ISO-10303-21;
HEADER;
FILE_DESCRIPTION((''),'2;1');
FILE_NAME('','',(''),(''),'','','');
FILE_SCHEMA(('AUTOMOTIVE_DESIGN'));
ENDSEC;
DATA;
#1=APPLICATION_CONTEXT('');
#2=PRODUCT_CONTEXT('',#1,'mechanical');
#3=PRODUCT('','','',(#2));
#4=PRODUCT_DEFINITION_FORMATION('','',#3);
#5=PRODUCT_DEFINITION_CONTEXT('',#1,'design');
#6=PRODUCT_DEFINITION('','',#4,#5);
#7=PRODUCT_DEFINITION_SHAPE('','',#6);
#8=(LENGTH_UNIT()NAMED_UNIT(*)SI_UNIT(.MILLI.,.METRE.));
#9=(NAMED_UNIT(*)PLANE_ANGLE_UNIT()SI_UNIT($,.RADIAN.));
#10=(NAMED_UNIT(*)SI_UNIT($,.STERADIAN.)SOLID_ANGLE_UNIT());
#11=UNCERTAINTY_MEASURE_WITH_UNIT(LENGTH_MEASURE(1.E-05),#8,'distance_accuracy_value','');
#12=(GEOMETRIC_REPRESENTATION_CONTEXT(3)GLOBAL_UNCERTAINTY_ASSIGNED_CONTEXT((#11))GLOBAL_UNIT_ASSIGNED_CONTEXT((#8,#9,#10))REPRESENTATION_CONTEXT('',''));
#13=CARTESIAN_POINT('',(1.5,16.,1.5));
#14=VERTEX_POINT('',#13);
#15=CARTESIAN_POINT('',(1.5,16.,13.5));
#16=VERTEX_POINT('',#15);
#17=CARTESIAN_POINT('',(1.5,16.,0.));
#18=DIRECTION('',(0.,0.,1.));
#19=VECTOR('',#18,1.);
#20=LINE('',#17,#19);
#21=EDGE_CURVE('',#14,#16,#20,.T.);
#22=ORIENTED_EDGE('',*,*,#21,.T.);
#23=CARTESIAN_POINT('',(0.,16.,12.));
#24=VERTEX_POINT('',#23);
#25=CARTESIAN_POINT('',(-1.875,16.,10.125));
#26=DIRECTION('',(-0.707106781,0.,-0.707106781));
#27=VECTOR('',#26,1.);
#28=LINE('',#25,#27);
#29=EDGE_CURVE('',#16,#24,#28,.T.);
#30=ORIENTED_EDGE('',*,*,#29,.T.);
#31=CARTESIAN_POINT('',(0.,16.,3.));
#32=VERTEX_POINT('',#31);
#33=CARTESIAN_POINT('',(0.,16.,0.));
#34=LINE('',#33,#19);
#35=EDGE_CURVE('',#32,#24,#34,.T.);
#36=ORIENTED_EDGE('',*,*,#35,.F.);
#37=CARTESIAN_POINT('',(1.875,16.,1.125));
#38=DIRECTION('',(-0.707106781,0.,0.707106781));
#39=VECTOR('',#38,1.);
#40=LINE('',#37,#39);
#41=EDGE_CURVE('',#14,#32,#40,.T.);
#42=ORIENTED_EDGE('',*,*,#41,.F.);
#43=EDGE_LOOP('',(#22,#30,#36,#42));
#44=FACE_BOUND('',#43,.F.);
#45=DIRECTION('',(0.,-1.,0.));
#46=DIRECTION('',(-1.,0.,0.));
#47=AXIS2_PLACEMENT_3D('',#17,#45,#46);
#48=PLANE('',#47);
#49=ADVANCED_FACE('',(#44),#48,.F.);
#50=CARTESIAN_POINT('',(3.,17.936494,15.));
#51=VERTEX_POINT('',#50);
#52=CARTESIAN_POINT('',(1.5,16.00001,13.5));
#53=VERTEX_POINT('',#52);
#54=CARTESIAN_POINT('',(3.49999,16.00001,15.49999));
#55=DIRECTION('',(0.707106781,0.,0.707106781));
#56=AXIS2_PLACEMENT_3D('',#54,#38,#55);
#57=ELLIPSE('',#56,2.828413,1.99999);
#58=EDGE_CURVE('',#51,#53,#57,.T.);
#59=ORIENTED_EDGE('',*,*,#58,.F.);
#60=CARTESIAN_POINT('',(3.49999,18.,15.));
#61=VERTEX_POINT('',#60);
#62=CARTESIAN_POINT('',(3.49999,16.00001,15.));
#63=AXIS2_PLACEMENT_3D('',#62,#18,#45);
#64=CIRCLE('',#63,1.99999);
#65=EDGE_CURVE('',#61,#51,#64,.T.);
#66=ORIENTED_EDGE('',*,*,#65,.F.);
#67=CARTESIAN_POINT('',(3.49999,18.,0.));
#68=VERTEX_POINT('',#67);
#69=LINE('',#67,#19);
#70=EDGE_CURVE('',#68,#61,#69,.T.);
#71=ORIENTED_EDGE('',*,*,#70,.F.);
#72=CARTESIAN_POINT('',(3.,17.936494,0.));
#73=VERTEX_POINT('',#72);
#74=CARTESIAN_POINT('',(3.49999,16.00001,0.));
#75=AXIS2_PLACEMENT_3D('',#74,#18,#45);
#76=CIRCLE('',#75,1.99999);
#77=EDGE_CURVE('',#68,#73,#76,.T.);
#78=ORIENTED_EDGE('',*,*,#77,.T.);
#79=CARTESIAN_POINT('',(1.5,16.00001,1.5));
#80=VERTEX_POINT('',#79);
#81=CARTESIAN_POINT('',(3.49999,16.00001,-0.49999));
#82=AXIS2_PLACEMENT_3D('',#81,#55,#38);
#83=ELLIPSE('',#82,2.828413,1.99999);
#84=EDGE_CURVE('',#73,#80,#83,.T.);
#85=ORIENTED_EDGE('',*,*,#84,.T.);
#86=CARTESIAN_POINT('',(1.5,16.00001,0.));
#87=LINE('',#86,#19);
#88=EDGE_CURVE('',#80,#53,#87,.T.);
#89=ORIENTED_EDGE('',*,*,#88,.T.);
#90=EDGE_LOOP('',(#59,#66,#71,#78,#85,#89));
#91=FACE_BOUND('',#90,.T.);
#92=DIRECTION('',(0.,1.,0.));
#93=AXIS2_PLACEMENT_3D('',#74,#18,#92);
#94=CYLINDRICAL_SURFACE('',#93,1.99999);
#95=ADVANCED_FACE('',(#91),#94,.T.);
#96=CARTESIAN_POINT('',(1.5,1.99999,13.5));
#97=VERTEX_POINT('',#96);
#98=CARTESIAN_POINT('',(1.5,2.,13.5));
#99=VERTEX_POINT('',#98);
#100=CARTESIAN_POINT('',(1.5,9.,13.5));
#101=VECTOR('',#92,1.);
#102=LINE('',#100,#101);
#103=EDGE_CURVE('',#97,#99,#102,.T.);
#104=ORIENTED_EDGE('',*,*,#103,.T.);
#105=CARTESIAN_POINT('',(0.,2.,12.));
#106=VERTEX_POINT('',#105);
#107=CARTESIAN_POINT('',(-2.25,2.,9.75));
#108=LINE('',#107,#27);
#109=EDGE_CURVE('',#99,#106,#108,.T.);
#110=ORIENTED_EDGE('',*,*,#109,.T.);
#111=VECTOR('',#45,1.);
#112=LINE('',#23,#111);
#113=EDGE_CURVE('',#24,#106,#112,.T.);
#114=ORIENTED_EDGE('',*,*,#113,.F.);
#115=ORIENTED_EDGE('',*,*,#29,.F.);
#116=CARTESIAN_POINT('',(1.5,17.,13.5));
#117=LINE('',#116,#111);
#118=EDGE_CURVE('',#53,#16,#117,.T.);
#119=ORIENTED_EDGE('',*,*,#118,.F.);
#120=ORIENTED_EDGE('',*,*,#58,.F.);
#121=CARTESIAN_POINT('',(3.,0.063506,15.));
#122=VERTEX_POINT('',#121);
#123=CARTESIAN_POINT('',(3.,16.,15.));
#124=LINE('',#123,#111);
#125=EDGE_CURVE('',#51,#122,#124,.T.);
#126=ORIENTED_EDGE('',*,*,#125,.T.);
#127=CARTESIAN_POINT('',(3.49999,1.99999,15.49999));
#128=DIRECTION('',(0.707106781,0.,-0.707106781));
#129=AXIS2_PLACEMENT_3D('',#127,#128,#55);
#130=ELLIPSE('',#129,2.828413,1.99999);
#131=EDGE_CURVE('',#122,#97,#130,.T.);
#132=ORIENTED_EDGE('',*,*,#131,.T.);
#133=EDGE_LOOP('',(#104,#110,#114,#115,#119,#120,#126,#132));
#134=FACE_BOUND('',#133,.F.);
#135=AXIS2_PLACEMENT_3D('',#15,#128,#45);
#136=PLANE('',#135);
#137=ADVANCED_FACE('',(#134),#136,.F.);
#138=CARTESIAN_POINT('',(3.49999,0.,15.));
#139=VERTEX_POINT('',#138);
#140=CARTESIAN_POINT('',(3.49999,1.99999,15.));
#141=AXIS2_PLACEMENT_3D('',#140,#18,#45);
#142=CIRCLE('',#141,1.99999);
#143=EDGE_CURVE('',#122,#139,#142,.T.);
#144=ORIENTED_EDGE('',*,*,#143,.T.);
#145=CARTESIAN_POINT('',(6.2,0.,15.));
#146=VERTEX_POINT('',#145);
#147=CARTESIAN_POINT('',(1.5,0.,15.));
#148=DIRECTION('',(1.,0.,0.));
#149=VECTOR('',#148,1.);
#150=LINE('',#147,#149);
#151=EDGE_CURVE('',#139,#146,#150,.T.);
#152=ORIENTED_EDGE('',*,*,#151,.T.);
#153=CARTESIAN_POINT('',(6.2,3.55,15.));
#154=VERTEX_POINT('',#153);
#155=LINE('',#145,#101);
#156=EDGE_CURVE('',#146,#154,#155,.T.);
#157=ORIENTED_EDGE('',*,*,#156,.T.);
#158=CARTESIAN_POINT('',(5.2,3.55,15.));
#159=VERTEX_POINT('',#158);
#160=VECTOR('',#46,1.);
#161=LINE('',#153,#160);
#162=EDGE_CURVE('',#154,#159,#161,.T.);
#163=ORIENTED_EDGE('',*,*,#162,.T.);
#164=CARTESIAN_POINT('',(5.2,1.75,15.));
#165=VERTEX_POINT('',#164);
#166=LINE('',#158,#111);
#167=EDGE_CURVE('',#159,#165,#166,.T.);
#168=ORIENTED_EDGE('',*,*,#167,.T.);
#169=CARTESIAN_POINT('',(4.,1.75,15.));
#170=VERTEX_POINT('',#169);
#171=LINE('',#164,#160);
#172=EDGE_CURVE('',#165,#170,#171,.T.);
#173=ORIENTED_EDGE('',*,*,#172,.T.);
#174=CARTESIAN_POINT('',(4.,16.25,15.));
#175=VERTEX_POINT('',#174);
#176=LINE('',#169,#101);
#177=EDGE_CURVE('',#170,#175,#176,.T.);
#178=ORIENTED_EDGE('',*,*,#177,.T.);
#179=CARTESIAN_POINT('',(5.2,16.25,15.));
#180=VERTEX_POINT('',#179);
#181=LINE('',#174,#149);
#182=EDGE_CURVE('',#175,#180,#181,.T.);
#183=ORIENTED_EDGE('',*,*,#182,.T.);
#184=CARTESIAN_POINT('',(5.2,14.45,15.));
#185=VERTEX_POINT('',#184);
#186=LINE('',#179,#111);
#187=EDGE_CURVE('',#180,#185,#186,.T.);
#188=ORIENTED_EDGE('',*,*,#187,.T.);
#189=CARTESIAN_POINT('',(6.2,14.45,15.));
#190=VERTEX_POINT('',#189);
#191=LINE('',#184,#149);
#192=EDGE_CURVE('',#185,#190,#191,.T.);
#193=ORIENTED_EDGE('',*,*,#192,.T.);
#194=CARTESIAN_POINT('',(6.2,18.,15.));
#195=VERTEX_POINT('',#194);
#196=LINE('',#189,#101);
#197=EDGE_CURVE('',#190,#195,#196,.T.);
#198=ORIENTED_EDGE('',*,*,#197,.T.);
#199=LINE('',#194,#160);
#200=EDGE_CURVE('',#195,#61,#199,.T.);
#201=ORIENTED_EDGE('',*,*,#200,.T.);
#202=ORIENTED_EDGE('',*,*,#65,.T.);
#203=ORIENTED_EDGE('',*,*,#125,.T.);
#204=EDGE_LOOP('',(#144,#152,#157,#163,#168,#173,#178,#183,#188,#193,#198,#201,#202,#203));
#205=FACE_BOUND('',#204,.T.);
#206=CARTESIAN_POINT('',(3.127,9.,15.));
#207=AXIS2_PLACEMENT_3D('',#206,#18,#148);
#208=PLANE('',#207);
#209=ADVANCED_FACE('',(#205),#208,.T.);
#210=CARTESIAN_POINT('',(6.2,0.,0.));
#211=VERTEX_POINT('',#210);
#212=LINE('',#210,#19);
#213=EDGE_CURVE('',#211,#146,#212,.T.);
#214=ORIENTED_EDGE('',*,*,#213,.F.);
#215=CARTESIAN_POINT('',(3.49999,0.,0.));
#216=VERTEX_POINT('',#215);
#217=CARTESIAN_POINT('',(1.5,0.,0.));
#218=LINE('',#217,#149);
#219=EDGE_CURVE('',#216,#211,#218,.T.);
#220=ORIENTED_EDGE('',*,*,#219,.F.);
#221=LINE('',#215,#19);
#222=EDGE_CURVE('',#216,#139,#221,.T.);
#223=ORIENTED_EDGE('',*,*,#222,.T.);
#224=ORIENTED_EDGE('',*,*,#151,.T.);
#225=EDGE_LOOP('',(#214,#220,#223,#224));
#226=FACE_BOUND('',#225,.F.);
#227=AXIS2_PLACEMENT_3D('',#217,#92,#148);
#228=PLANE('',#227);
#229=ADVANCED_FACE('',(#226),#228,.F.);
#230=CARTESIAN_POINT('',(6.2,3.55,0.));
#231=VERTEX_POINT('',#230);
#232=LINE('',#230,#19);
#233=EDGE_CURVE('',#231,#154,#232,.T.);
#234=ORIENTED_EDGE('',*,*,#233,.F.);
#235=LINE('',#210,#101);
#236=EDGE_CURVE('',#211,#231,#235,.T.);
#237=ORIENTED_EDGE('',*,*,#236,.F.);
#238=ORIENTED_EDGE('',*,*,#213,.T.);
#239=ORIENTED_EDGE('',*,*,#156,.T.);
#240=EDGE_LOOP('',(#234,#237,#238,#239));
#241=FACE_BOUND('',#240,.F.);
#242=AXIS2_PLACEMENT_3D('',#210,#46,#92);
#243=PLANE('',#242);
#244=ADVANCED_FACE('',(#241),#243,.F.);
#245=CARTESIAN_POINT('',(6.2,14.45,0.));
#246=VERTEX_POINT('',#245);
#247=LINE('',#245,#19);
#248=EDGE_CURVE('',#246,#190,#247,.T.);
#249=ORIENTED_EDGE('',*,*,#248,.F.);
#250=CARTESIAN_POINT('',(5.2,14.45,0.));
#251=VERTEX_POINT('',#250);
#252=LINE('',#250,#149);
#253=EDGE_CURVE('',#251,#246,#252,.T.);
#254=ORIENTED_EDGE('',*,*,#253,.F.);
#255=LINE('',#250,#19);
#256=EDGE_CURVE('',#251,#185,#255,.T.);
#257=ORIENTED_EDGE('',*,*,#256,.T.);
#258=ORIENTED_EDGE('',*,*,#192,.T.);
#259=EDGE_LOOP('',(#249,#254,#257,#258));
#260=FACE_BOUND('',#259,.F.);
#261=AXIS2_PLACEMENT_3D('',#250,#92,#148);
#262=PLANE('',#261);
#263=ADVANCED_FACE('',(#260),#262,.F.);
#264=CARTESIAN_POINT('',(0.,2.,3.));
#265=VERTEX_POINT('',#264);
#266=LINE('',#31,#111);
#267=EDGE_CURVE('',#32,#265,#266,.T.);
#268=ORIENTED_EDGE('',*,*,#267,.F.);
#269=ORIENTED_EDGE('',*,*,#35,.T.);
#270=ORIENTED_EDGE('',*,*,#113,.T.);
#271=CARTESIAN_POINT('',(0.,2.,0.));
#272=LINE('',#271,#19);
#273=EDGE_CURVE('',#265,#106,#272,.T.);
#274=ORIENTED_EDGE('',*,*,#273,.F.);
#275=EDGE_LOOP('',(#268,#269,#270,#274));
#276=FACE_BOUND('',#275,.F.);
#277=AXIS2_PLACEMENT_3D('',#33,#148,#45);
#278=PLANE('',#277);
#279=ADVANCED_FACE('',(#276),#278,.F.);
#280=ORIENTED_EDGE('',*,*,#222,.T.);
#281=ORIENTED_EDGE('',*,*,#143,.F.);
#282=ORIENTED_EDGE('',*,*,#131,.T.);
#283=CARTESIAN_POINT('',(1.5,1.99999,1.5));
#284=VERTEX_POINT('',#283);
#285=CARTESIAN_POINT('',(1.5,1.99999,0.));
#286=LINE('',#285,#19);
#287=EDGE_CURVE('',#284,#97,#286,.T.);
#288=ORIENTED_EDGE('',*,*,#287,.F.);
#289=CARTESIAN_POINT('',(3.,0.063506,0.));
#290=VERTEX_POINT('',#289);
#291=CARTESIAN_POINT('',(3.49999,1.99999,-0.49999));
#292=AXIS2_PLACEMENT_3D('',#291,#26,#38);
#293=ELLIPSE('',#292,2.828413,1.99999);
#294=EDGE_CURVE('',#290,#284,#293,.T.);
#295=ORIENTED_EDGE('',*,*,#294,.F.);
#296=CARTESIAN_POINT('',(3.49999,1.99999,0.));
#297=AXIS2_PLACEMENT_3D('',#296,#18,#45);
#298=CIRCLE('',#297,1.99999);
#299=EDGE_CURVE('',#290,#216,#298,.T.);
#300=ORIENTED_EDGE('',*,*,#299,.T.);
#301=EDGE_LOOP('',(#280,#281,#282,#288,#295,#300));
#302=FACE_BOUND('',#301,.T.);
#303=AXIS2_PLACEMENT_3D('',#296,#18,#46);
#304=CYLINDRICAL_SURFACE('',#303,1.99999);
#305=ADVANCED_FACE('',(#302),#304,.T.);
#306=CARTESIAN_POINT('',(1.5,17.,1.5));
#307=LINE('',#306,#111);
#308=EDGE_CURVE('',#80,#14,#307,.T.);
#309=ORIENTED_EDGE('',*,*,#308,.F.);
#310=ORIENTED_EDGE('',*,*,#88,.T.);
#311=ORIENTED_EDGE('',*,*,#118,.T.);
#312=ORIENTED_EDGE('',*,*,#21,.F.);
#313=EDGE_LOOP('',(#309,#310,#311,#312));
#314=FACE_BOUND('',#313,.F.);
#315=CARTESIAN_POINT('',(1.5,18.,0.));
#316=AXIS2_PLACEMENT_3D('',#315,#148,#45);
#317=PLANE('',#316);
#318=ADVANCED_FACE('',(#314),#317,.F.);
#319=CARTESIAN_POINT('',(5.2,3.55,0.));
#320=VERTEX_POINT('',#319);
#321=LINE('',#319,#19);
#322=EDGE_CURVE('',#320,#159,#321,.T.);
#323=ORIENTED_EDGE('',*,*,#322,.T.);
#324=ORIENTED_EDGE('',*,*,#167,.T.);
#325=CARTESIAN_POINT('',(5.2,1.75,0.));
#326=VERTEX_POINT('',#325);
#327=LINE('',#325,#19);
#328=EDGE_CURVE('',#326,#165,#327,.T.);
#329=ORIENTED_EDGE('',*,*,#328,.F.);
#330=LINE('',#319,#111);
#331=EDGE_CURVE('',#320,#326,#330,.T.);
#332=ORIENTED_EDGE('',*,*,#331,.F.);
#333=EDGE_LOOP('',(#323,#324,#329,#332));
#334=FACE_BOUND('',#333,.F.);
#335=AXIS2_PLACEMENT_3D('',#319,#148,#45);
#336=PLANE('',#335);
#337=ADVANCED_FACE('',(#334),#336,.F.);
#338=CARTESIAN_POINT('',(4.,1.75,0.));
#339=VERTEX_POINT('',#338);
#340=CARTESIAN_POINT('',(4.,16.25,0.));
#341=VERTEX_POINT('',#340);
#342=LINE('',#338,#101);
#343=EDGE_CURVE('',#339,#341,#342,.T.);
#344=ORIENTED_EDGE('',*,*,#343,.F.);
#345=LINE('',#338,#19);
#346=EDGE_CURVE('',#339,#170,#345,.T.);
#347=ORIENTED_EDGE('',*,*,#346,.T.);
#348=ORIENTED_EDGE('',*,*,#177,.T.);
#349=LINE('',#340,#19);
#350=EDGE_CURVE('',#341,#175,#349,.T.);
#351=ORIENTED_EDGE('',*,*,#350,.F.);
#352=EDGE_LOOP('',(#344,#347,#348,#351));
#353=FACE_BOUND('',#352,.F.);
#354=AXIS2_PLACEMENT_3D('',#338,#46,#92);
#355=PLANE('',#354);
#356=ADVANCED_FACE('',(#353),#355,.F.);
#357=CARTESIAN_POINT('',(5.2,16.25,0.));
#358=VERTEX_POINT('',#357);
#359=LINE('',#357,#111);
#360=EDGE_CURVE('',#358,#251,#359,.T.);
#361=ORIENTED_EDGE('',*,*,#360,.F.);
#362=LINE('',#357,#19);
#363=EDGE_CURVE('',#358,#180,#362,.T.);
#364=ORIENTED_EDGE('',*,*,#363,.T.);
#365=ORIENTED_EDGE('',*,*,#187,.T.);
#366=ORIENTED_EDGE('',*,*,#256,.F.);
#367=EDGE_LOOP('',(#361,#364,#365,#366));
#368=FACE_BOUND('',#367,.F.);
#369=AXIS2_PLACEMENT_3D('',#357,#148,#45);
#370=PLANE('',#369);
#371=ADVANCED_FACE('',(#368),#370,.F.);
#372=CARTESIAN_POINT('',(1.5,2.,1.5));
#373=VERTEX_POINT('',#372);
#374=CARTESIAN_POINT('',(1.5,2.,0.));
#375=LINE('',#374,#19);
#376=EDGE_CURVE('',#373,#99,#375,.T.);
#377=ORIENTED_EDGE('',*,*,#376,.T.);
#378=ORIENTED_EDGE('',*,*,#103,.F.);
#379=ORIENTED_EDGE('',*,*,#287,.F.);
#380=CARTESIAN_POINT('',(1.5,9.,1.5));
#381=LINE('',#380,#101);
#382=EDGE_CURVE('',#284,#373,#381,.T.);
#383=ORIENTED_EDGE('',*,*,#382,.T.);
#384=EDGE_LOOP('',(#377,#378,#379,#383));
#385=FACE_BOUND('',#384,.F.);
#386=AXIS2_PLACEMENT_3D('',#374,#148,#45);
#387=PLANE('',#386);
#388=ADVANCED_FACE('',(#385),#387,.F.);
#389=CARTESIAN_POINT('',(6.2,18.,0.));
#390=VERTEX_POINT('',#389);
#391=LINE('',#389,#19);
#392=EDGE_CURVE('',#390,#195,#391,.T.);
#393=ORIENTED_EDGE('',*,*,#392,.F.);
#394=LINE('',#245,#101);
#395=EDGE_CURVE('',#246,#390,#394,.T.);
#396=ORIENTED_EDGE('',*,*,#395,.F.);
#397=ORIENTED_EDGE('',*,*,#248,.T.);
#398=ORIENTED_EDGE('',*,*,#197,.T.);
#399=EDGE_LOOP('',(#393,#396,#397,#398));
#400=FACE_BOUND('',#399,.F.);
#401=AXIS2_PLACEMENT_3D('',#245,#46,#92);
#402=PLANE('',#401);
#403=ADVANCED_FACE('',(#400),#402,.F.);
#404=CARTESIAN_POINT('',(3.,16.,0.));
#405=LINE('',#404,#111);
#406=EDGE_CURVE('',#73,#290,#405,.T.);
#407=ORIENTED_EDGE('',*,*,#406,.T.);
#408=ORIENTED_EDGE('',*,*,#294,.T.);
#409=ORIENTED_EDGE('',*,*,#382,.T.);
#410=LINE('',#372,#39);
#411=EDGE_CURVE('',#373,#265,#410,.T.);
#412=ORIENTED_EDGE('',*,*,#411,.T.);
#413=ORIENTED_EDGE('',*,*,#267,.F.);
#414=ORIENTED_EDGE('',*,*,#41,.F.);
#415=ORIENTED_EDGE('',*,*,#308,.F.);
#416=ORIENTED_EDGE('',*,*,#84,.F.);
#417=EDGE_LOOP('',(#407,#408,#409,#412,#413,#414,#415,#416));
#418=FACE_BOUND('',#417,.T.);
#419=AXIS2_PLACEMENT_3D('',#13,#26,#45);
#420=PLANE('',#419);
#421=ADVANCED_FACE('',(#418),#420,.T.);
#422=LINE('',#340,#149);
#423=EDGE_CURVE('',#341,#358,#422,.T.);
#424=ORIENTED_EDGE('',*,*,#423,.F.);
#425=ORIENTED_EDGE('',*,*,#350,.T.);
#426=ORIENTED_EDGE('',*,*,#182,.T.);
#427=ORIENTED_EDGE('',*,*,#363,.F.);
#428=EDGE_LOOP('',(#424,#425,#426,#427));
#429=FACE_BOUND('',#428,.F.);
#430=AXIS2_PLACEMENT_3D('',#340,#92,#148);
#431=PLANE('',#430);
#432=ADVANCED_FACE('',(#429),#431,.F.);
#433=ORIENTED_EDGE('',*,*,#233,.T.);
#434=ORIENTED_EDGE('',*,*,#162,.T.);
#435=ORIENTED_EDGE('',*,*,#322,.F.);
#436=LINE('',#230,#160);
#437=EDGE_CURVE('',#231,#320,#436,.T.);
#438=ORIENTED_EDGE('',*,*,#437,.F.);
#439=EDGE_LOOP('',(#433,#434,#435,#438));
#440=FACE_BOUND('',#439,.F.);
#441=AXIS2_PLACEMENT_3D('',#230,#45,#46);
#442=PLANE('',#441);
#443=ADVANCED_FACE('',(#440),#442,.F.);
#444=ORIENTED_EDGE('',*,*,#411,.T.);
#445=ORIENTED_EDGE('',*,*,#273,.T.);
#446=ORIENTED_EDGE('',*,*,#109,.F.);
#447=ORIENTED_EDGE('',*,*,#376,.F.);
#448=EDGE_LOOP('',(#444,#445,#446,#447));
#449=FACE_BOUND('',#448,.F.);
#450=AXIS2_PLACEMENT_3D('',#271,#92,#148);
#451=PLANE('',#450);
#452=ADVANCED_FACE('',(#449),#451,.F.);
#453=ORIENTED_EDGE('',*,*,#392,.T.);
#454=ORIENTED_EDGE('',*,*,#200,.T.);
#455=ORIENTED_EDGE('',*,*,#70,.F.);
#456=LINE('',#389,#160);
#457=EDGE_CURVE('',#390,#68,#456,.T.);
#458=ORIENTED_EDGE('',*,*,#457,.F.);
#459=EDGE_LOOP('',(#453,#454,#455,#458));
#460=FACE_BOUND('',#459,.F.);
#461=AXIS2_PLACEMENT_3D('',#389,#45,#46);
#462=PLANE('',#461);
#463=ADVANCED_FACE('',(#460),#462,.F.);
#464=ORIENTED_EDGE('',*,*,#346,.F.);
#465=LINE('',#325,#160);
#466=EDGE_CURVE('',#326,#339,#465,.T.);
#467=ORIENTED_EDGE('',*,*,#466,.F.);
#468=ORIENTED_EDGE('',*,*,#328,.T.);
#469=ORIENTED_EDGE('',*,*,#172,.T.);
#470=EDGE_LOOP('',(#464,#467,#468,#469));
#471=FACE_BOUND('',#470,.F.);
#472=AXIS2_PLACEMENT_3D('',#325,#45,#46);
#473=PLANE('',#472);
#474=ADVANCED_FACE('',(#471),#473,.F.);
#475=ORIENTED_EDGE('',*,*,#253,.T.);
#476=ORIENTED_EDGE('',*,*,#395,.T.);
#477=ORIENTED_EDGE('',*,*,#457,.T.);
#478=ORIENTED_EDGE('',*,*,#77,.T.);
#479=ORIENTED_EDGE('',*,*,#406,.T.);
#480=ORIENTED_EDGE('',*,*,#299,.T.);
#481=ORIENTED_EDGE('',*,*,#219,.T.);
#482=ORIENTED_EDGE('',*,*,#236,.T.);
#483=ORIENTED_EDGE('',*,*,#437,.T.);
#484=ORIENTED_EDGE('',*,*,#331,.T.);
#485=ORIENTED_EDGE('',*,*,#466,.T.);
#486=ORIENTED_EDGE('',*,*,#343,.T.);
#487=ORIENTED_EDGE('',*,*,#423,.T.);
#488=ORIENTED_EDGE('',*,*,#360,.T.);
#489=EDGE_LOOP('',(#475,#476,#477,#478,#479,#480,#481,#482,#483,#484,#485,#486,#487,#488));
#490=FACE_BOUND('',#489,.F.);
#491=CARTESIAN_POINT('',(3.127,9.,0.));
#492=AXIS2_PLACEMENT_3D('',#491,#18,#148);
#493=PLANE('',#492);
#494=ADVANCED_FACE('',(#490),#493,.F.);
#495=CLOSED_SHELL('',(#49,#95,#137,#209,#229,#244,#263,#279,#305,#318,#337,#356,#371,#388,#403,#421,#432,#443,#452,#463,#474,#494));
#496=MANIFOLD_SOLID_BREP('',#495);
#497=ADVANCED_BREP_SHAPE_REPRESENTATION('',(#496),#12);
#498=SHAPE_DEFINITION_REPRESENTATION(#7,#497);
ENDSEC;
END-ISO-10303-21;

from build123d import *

# Parameters (mm, degrees)
F1_DEPTH = 15
F2_R     = 1.99999
F3_SIZE  = 3


# Not quite as in the source:
# - a fillet or chamfer is up to 0.001 mm smaller than in the source, because OpenCascade refuses the exact size


with BuildPart() as f1:
    # F0 (on Top) → F1 (new body)
    with BuildSketch(Plane.XY):
        Polygon((0, 16), (0, 2), (1.5, 2), (1.5, 0), (6.2, 0), (6.2, 3.55), (5.2, 3.55), (5.2, 1.75), (4, 1.75), (4, 16.25), (5.2, 16.25), (5.2, 14.45), (6.2, 14.45), (6.2, 18), (1.5, 18), (1.5, 16), align=None)
    extrude(amount=F1_DEPTH)

    # F2 (radius 2 in the source; OpenCascade refuses exactly that, so slightly less here)
    f2_edges = [f1.edges().sort_by_distance(p)[0] for p in [
        (1.5, 0, 7.5),
        (1.5, 18, 7.5),
    ]]
    fillet(f2_edges, radius=F2_R)

    # F3
    f3_edges = [f1.edges().sort_by_distance(p)[0] for p in [
        (0, 9, 0),
        (0, 9, 15),
    ]]
    chamfer(f3_edges, length=F3_SIZE)


solid = f1.part
